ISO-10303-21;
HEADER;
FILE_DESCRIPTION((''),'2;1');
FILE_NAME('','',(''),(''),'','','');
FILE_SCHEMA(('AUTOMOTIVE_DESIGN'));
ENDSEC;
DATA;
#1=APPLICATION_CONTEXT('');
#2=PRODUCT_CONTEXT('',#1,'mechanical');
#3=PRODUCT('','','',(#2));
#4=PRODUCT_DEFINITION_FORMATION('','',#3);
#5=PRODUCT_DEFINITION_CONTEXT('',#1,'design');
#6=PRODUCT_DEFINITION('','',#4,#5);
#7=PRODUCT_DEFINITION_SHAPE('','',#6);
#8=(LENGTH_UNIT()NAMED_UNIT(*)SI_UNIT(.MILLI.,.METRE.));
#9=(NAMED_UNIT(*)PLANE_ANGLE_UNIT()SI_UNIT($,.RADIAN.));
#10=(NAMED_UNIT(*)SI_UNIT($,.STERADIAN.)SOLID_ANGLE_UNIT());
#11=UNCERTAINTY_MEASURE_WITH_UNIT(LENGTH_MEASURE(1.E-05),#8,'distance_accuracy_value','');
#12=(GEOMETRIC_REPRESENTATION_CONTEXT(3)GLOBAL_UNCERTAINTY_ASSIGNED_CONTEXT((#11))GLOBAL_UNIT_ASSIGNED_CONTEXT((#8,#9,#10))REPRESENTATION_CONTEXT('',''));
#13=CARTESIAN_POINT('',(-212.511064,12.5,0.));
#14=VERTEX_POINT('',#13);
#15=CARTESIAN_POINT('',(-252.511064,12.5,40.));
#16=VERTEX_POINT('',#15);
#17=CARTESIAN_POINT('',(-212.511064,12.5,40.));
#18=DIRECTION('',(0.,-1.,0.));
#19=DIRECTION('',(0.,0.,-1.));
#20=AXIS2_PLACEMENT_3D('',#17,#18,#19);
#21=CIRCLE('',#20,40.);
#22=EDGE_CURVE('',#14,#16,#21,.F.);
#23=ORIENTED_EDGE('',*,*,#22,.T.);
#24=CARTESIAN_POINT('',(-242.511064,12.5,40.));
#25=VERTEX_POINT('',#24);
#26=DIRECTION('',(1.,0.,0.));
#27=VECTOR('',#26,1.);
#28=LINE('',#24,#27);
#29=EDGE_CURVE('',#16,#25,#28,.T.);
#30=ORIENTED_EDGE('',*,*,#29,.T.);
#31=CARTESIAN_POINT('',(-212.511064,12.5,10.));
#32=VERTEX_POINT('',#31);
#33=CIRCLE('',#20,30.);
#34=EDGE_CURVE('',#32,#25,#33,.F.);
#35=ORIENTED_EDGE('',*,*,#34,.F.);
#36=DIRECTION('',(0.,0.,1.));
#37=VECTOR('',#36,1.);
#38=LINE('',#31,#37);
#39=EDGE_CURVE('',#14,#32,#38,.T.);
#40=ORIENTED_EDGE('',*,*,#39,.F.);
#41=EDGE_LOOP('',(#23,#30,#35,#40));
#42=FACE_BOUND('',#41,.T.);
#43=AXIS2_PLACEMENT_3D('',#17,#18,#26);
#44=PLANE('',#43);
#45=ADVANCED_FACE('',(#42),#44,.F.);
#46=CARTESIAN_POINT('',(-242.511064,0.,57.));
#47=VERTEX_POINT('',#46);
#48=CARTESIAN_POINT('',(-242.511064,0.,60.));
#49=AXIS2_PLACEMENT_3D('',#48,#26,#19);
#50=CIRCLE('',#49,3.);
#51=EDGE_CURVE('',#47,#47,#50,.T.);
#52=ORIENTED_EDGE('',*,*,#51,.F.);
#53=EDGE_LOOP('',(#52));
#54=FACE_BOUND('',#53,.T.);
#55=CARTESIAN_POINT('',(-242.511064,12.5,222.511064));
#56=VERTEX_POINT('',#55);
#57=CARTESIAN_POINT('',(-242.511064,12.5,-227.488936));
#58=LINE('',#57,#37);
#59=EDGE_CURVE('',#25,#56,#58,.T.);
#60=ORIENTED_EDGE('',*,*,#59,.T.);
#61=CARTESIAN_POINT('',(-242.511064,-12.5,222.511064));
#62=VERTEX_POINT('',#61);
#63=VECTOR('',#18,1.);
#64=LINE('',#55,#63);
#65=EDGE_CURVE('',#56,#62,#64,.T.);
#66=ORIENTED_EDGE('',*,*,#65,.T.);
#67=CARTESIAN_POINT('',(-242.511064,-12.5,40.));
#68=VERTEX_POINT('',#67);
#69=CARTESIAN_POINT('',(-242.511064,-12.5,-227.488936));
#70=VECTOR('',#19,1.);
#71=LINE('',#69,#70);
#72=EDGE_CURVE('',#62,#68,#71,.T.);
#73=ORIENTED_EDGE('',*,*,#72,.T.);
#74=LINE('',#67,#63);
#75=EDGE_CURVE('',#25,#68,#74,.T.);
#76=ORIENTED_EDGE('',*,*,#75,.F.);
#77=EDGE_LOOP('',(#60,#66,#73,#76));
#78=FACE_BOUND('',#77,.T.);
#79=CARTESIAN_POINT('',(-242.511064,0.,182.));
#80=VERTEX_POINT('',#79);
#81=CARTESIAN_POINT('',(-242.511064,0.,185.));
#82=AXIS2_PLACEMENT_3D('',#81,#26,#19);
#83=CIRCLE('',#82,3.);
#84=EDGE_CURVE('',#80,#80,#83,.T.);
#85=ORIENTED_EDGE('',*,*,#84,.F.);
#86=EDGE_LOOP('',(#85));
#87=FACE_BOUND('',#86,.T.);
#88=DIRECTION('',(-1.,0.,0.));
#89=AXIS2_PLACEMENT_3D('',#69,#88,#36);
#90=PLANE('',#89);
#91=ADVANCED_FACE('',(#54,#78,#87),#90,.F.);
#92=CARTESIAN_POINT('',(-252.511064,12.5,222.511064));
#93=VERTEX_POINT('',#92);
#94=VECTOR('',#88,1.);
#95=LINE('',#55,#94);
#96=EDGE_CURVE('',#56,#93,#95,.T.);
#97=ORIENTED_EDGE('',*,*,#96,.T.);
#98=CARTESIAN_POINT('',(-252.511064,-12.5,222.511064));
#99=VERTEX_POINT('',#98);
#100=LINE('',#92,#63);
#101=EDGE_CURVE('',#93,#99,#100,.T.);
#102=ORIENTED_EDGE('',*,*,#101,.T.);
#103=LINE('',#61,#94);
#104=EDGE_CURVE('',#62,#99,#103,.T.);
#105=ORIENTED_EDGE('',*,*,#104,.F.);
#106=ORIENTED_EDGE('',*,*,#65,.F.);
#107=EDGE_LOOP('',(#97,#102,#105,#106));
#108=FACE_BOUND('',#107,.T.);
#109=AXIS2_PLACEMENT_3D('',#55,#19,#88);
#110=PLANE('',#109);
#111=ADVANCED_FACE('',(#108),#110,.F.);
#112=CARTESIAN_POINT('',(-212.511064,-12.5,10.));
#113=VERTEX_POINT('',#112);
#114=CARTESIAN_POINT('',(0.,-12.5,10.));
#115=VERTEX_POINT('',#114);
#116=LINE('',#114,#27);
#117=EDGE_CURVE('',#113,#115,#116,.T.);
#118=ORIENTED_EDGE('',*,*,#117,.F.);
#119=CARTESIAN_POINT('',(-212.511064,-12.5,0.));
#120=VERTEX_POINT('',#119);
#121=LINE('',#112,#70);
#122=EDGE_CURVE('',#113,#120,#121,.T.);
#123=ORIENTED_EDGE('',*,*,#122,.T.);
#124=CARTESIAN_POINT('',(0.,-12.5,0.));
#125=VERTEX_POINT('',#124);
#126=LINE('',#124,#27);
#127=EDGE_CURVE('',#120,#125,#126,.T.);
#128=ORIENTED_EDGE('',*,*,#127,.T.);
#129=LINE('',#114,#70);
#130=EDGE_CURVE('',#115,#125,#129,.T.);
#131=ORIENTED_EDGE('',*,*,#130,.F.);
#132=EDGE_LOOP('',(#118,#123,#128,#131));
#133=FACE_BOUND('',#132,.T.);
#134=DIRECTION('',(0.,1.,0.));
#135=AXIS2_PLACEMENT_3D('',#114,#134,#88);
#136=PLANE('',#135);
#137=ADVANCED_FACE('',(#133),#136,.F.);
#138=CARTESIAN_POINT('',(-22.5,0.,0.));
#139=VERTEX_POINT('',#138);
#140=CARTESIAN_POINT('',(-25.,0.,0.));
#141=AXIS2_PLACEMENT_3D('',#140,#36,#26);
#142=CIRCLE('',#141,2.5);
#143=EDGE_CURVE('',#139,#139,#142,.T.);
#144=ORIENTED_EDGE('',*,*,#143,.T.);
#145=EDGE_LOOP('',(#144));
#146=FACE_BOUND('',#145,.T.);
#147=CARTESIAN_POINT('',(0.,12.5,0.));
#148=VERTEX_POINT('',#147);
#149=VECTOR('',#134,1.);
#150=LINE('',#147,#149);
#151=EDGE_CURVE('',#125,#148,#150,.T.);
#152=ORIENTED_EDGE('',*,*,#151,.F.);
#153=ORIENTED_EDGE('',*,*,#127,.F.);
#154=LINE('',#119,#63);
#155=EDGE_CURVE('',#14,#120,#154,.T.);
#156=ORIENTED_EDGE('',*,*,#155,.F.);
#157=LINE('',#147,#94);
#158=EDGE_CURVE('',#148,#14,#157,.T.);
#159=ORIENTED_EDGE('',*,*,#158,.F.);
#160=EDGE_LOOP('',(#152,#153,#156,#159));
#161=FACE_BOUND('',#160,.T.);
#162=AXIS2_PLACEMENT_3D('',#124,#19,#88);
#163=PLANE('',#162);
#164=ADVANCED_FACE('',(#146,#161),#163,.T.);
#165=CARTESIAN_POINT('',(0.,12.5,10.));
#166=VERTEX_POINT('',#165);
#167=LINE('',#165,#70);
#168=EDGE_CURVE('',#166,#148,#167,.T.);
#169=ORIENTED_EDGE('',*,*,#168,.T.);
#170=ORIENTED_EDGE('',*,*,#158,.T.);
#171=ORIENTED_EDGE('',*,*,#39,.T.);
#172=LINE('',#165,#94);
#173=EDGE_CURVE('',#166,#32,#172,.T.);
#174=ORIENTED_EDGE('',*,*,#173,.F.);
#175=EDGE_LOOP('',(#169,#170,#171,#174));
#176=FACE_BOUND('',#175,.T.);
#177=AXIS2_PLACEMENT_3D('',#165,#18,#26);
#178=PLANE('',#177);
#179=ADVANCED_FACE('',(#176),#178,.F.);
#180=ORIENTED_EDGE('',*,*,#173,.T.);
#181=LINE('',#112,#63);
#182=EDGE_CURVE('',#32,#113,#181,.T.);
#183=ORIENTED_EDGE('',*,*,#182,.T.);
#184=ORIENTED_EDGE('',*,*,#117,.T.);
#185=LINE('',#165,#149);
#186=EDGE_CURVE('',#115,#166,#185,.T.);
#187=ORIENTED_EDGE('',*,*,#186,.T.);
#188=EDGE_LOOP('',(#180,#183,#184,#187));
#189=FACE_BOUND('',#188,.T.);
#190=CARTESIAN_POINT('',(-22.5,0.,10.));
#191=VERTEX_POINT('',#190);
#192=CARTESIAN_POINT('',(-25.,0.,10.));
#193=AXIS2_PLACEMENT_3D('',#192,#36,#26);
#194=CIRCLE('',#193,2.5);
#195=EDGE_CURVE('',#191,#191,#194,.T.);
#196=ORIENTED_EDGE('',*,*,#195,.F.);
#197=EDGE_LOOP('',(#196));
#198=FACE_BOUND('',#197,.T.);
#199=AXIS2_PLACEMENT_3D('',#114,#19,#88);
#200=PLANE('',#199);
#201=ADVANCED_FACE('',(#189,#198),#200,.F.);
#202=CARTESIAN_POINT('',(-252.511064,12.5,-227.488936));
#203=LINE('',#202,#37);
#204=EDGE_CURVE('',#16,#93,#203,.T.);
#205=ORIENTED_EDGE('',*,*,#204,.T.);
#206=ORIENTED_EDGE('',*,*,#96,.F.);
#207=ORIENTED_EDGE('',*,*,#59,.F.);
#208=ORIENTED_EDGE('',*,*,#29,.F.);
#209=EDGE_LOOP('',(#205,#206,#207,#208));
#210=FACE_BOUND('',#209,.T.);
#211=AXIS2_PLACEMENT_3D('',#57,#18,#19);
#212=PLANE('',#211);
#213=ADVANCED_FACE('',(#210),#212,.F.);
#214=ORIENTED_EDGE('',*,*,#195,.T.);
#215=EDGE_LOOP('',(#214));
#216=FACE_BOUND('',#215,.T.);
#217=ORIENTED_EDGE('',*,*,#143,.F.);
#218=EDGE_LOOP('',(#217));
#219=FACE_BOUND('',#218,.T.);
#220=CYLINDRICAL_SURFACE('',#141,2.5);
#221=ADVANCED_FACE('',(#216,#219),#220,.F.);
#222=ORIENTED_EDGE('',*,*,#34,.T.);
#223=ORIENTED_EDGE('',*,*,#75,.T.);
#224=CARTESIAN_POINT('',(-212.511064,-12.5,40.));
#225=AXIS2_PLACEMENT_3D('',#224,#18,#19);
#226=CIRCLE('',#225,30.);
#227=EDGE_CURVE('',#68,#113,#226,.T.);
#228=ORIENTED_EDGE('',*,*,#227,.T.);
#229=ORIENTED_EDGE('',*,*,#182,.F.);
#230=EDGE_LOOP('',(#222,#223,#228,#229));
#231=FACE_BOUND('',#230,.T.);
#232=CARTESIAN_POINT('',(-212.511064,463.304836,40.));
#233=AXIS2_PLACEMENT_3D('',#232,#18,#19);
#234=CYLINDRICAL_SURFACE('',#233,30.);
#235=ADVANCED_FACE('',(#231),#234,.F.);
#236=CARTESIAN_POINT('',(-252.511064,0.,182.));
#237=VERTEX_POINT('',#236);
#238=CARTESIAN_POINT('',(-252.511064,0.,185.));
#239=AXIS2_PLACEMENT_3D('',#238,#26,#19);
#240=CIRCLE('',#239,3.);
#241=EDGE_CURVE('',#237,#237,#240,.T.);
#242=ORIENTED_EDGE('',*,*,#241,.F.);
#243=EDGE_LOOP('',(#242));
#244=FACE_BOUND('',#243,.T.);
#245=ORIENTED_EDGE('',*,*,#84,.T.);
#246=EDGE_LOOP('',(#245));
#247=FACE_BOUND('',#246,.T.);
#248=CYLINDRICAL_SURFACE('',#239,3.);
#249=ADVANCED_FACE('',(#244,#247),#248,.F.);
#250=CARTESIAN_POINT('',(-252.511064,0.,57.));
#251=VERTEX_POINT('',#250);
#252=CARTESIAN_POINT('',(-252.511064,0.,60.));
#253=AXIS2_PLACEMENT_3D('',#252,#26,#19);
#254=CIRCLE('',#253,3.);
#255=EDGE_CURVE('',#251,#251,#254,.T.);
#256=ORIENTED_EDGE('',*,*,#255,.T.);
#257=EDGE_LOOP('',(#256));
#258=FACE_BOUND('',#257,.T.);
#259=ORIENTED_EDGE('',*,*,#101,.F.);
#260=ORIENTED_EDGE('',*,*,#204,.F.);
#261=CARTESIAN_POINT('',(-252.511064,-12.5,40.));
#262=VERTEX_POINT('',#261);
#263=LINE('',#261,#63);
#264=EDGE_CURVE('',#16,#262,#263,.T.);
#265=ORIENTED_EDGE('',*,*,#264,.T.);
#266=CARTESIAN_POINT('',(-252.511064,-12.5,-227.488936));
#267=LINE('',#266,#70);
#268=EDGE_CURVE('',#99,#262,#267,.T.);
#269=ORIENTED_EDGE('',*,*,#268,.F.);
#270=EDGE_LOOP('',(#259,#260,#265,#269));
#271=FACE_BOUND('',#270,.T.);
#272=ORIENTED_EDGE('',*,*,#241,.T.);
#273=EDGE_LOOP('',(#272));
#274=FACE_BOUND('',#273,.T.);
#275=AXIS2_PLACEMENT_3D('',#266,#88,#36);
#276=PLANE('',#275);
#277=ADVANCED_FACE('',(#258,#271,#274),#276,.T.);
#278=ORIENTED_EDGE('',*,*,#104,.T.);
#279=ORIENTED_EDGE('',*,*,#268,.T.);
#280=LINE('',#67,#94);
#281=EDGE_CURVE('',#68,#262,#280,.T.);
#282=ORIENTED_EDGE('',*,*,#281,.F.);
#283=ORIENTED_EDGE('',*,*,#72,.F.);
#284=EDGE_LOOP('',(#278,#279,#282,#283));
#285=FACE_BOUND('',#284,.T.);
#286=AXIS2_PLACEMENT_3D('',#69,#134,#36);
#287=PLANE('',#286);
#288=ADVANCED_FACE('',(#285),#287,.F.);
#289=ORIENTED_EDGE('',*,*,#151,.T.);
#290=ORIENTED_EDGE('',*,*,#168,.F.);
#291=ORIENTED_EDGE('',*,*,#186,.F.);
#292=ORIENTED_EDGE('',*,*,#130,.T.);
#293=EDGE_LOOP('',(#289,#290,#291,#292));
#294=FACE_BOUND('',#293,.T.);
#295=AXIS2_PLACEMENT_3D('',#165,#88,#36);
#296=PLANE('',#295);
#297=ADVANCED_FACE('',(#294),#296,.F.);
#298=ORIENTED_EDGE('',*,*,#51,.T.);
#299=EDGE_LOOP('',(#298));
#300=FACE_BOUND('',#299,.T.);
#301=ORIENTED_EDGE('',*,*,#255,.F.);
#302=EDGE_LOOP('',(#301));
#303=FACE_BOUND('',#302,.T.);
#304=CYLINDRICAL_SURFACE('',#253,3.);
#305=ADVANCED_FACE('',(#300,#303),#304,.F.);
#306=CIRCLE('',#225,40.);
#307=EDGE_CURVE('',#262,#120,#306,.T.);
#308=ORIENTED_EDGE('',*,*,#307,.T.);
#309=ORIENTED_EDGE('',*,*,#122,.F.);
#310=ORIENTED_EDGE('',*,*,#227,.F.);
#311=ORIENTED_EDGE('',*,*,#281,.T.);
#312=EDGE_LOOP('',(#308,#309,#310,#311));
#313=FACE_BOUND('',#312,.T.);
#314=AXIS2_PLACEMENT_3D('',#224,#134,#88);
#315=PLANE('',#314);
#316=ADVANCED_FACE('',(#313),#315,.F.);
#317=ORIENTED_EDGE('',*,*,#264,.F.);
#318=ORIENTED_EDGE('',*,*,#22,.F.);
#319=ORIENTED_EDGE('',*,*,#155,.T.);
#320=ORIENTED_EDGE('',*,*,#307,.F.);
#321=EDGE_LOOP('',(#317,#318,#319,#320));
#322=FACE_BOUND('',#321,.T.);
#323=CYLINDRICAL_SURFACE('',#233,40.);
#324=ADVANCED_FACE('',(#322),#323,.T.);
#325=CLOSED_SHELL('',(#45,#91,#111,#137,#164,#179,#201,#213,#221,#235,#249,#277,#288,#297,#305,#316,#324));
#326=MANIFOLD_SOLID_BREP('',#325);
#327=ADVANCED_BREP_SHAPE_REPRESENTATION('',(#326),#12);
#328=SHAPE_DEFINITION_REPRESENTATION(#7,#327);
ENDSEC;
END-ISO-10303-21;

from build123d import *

# Parameters (mm, degrees)
ESQUISSE1_W             = 450
ESQUISSE1_H             = 25
EXTRUSION1_DEPTH        = 10
PLIAGE_START            = -12.5
PLIAGE_1_DEPTH          = 25
PLIAGE_1_2_DEPTH        = 25
ESQUISSE5_R             = 3
ENL_V_MAT_EXTRU_1_DEPTH = 330.361564282
ESQUISSE7_R             = 2.5
ENL_V_MAT_EXTRU_2_DEPTH = 331.27116136


# Read off the part's stored shape, not the designer's step: Pliage 1
with BuildPart() as part:
    # Esquisse1 → Extrusion1 (new body)
    with BuildSketch(Plane.XY):
        with Locations((-225, 0)):
            Rectangle(ESQUISSE1_W, ESQUISSE1_H)
    extrude(amount=EXTRUSION1_DEPTH)

    # Pliage 1 outline → Pliage 1 (cut)
    with BuildSketch(Plane(origin=(0, 0, 0), x_dir=(1, 0, 0), z_dir=(0, 1, 0)).offset(PLIAGE_START)):
        with BuildLine():
            Line((-450, -10), (-238.968577392, -10))
            ThreePointArc((-238.968577392, -10), (-226.653199905, -2.583426132), (-212.511064281, 0))
            Line((-212.511064281, 0), (-450, 0))
            Line((-450, 0), (-450, -10))
        make_face()
    extrude(amount=PLIAGE_1_DEPTH, mode=Mode.SUBTRACT)

    # Pliage 1 2 outline → Pliage 1 2 (add)
    with BuildSketch(Plane(origin=(0, 0, 0), x_dir=(1, 0, 0), z_dir=(0, 1, 0)).offset(PLIAGE_START)):
        with BuildLine():
            ThreePointArc((-238.968577392, -10), (-248.968577392, -23.542486889), (-252.511064281, -40))
            Line((-252.511064281, -40), (-252.511064281, -222.511064281))
            Line((-252.511064281, -222.511064281), (-242.511064281, -222.511064281))
            Line((-242.511064281, -222.511064281), (-242.511064281, -40))
            ThreePointArc((-242.511064281, -40), (-233.724267717, -18.786796564), (-212.511064281, -10))
            Line((-212.511064281, -10), (-238.968577392, -10))
        make_face()
    extrude(amount=PLIAGE_1_2_DEPTH)

    # Esquisse5 → Enlèv. mat.-Extru.1 (cut, through all)
    with BuildSketch(Plane(origin=(-242.511064281, 0, 0), x_dir=(0, 0, -1), z_dir=(1, 0, 0))):
        with Locations((-185, 0)):
            Circle(ESQUISSE5_R)
        with Locations((-60, 0)):
            Circle(ESQUISSE5_R)
    extrude(amount=-ENL_V_MAT_EXTRU_1_DEPTH, mode=Mode.SUBTRACT)

    # Esquisse7 → Enlèv. mat.-Extru.2 (cut, through all)
    with BuildSketch(Plane.XY.offset(10)):
        with Locations((-25, 0)):
            Circle(ESQUISSE7_R)
    extrude(amount=-ENL_V_MAT_EXTRU_2_DEPTH, mode=Mode.SUBTRACT)


solid = part.part
